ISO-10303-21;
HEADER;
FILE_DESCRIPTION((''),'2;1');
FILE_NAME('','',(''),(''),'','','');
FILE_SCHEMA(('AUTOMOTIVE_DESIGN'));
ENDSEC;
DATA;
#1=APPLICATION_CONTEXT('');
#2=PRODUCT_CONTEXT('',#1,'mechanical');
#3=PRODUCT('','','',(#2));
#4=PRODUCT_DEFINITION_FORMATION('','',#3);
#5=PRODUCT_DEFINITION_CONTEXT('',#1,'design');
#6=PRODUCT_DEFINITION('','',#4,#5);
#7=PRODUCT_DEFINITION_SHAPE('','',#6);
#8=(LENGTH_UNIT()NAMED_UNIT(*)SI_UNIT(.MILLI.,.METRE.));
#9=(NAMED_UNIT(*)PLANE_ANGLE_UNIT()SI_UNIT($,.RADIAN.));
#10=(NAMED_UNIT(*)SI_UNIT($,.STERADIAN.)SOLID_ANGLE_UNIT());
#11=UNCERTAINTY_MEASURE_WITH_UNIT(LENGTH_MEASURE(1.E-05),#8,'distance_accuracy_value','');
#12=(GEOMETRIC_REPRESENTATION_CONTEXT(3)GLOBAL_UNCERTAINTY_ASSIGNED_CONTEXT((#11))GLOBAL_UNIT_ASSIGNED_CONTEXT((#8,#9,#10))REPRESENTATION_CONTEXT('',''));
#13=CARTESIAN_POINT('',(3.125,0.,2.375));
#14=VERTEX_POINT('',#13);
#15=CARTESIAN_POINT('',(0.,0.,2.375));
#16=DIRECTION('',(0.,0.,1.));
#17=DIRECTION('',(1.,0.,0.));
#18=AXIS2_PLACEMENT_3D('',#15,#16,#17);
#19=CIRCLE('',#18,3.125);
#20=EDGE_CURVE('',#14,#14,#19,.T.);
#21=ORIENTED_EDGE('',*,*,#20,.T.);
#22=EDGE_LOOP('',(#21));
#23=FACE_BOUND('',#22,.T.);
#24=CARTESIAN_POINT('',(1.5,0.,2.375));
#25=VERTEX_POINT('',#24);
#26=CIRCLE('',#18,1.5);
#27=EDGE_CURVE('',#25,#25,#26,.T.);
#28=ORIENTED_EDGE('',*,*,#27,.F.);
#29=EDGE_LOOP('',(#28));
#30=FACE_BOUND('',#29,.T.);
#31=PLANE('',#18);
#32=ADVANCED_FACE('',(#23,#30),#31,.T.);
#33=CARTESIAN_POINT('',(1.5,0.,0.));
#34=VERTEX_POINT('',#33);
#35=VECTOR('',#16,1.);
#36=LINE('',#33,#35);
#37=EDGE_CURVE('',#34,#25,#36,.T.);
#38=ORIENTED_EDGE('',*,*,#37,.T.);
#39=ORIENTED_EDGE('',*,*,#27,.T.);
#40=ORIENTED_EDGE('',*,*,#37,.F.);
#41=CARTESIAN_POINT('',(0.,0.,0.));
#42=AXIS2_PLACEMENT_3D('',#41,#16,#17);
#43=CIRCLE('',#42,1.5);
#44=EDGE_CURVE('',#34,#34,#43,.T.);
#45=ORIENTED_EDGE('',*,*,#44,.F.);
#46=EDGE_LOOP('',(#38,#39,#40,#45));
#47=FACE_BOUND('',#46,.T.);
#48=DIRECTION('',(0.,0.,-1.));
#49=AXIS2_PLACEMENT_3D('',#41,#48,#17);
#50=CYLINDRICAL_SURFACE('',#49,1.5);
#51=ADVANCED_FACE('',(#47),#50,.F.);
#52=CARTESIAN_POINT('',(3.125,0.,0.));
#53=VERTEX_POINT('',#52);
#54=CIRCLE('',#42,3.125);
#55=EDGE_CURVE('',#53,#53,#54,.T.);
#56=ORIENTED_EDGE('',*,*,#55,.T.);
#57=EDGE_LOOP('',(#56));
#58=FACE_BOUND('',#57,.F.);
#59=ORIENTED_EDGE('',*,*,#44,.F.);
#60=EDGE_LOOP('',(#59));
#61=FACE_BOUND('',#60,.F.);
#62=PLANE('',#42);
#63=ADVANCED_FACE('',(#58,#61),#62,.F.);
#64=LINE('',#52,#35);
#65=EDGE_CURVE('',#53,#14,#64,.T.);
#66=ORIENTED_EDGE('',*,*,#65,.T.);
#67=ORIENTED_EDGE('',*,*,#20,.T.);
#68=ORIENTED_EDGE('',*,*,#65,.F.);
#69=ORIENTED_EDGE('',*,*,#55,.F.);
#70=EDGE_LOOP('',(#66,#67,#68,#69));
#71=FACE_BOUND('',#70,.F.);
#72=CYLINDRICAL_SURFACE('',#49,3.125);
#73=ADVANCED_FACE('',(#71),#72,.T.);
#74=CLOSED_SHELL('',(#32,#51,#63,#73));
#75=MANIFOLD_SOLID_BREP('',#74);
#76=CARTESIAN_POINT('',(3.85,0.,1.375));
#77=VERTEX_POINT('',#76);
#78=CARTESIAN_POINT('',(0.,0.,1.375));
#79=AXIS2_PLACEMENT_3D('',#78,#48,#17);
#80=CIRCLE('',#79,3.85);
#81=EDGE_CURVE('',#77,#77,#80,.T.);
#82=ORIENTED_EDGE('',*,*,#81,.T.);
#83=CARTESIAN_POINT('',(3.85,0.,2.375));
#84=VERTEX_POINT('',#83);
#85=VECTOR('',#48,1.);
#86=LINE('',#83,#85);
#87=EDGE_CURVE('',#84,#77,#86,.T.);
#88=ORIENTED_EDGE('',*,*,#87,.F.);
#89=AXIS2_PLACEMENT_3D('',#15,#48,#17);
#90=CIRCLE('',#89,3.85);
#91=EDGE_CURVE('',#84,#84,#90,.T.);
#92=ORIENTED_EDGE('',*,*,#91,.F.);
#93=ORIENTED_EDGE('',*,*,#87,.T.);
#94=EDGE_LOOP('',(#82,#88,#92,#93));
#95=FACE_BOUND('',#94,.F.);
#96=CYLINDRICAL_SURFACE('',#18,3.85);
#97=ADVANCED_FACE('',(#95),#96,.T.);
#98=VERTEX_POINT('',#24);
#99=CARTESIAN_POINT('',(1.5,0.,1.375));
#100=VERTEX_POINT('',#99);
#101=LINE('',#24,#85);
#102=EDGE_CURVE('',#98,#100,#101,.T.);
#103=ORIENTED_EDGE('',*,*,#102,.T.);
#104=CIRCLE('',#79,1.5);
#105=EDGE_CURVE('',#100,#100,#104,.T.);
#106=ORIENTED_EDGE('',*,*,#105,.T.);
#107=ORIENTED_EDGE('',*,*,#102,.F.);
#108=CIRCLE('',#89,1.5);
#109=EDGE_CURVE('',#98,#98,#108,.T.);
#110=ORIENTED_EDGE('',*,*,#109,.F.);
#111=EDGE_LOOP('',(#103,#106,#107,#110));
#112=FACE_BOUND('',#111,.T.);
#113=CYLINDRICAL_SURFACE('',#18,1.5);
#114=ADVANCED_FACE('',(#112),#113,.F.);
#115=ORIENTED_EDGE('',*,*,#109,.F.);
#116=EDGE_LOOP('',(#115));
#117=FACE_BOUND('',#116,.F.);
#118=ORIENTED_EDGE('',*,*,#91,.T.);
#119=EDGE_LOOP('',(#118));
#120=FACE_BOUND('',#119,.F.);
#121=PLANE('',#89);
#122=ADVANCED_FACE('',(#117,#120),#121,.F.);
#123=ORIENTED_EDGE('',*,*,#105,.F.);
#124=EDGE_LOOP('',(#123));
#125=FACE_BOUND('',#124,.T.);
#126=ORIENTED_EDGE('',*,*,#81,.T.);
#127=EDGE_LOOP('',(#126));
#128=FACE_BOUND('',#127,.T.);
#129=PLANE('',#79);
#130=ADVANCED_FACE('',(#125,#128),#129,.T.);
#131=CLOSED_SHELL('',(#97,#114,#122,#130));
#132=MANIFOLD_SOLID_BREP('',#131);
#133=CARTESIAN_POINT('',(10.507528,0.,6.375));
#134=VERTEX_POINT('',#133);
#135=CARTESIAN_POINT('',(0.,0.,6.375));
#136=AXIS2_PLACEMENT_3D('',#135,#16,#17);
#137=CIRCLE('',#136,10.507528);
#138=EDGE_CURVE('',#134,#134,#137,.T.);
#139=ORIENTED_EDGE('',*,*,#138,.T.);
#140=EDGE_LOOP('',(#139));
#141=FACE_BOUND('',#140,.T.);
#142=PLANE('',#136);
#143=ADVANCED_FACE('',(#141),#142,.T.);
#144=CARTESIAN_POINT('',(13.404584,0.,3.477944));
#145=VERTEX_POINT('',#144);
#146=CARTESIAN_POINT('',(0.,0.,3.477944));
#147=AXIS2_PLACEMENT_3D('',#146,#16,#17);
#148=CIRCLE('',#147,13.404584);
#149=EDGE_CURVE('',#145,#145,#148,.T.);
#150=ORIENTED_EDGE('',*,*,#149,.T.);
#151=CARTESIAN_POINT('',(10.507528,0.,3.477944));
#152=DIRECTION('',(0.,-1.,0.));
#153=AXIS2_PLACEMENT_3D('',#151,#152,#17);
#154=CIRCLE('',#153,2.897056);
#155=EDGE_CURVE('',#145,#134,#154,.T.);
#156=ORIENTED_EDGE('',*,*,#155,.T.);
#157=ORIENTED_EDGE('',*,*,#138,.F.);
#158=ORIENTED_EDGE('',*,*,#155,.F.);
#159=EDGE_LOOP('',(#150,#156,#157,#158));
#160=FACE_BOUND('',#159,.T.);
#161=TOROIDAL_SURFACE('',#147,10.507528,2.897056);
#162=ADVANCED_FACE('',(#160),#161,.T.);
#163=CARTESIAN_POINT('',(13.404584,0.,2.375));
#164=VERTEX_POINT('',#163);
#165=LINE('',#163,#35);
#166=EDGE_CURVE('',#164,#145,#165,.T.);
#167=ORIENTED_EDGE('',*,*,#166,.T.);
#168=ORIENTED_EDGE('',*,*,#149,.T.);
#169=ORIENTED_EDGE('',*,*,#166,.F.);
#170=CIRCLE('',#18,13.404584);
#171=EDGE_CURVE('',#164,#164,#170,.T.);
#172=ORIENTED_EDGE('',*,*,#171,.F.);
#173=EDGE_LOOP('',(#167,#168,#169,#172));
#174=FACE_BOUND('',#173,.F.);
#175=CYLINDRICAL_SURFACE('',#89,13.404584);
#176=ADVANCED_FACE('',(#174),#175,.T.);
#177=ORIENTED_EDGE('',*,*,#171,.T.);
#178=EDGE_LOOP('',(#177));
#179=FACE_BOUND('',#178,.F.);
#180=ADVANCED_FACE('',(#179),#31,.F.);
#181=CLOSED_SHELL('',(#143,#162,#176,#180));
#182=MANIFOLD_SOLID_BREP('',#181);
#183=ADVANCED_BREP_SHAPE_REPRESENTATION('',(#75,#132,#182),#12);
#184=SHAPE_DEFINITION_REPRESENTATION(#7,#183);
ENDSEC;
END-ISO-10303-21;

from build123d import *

# Parameters (mm, degrees)
F0_R     = 3.125
F0_R_2   = 1.5
F1_DEPTH = 2.375
F2_R     = 13.4045840815
F2_R_2   = 3.125
F2_R_3   = 1.5
F3_DEPTH = 4
F4_R     = 2.8970562748
F5_R     = 3.85
F5_R_2   = 1.5
F6_DEPTH = 1
F7_DEPTH = 4


with BuildPart() as f1:
    # F0 (on Top) → F1 (new body)
    with BuildSketch(Plane.XY):
        Circle(F0_R)
        Circle(F0_R_2, mode=Mode.SUBTRACT)
    extrude(amount=F1_DEPTH)


with BuildPart() as f3:
    # F2 (on face) → F3 (new body)
    with BuildSketch(Plane.XY.offset(2.375)):
        Circle(F2_R)
        Circle(F2_R_2, mode=Mode.SUBTRACT)
        Circle(F2_R_2)
        Circle(F2_R_3, mode=Mode.SUBTRACT)
    extrude(amount=F3_DEPTH)

    # F4
    f4_edges = [f3.edges().sort_by_distance(p)[0] for p in [
        (-13.404584, 0, 6.375),
    ]]
    fillet(f4_edges, radius=F4_R)

    # F5 (on face) → F7 (join)
    with BuildSketch(Plane(origin=(0, 0, 2.375), x_dir=(1, 0, 0), z_dir=(0, 0, -1))):
        Circle(F5_R)
        Circle(F5_R_2, mode=Mode.SUBTRACT)
        Circle(F5_R_2)
    extrude(amount=-F7_DEPTH)


with BuildPart() as f6:
    # F5 (on face) → F6 (new body)
    with BuildSketch(Plane(origin=(0, 0, 2.375), x_dir=(1, 0, 0), z_dir=(0, 0, -1))):
        Circle(F5_R)
        Circle(F5_R_2, mode=Mode.SUBTRACT)
    extrude(amount=F6_DEPTH)


solid = Compound([f1.part, f3.part, f6.part])
